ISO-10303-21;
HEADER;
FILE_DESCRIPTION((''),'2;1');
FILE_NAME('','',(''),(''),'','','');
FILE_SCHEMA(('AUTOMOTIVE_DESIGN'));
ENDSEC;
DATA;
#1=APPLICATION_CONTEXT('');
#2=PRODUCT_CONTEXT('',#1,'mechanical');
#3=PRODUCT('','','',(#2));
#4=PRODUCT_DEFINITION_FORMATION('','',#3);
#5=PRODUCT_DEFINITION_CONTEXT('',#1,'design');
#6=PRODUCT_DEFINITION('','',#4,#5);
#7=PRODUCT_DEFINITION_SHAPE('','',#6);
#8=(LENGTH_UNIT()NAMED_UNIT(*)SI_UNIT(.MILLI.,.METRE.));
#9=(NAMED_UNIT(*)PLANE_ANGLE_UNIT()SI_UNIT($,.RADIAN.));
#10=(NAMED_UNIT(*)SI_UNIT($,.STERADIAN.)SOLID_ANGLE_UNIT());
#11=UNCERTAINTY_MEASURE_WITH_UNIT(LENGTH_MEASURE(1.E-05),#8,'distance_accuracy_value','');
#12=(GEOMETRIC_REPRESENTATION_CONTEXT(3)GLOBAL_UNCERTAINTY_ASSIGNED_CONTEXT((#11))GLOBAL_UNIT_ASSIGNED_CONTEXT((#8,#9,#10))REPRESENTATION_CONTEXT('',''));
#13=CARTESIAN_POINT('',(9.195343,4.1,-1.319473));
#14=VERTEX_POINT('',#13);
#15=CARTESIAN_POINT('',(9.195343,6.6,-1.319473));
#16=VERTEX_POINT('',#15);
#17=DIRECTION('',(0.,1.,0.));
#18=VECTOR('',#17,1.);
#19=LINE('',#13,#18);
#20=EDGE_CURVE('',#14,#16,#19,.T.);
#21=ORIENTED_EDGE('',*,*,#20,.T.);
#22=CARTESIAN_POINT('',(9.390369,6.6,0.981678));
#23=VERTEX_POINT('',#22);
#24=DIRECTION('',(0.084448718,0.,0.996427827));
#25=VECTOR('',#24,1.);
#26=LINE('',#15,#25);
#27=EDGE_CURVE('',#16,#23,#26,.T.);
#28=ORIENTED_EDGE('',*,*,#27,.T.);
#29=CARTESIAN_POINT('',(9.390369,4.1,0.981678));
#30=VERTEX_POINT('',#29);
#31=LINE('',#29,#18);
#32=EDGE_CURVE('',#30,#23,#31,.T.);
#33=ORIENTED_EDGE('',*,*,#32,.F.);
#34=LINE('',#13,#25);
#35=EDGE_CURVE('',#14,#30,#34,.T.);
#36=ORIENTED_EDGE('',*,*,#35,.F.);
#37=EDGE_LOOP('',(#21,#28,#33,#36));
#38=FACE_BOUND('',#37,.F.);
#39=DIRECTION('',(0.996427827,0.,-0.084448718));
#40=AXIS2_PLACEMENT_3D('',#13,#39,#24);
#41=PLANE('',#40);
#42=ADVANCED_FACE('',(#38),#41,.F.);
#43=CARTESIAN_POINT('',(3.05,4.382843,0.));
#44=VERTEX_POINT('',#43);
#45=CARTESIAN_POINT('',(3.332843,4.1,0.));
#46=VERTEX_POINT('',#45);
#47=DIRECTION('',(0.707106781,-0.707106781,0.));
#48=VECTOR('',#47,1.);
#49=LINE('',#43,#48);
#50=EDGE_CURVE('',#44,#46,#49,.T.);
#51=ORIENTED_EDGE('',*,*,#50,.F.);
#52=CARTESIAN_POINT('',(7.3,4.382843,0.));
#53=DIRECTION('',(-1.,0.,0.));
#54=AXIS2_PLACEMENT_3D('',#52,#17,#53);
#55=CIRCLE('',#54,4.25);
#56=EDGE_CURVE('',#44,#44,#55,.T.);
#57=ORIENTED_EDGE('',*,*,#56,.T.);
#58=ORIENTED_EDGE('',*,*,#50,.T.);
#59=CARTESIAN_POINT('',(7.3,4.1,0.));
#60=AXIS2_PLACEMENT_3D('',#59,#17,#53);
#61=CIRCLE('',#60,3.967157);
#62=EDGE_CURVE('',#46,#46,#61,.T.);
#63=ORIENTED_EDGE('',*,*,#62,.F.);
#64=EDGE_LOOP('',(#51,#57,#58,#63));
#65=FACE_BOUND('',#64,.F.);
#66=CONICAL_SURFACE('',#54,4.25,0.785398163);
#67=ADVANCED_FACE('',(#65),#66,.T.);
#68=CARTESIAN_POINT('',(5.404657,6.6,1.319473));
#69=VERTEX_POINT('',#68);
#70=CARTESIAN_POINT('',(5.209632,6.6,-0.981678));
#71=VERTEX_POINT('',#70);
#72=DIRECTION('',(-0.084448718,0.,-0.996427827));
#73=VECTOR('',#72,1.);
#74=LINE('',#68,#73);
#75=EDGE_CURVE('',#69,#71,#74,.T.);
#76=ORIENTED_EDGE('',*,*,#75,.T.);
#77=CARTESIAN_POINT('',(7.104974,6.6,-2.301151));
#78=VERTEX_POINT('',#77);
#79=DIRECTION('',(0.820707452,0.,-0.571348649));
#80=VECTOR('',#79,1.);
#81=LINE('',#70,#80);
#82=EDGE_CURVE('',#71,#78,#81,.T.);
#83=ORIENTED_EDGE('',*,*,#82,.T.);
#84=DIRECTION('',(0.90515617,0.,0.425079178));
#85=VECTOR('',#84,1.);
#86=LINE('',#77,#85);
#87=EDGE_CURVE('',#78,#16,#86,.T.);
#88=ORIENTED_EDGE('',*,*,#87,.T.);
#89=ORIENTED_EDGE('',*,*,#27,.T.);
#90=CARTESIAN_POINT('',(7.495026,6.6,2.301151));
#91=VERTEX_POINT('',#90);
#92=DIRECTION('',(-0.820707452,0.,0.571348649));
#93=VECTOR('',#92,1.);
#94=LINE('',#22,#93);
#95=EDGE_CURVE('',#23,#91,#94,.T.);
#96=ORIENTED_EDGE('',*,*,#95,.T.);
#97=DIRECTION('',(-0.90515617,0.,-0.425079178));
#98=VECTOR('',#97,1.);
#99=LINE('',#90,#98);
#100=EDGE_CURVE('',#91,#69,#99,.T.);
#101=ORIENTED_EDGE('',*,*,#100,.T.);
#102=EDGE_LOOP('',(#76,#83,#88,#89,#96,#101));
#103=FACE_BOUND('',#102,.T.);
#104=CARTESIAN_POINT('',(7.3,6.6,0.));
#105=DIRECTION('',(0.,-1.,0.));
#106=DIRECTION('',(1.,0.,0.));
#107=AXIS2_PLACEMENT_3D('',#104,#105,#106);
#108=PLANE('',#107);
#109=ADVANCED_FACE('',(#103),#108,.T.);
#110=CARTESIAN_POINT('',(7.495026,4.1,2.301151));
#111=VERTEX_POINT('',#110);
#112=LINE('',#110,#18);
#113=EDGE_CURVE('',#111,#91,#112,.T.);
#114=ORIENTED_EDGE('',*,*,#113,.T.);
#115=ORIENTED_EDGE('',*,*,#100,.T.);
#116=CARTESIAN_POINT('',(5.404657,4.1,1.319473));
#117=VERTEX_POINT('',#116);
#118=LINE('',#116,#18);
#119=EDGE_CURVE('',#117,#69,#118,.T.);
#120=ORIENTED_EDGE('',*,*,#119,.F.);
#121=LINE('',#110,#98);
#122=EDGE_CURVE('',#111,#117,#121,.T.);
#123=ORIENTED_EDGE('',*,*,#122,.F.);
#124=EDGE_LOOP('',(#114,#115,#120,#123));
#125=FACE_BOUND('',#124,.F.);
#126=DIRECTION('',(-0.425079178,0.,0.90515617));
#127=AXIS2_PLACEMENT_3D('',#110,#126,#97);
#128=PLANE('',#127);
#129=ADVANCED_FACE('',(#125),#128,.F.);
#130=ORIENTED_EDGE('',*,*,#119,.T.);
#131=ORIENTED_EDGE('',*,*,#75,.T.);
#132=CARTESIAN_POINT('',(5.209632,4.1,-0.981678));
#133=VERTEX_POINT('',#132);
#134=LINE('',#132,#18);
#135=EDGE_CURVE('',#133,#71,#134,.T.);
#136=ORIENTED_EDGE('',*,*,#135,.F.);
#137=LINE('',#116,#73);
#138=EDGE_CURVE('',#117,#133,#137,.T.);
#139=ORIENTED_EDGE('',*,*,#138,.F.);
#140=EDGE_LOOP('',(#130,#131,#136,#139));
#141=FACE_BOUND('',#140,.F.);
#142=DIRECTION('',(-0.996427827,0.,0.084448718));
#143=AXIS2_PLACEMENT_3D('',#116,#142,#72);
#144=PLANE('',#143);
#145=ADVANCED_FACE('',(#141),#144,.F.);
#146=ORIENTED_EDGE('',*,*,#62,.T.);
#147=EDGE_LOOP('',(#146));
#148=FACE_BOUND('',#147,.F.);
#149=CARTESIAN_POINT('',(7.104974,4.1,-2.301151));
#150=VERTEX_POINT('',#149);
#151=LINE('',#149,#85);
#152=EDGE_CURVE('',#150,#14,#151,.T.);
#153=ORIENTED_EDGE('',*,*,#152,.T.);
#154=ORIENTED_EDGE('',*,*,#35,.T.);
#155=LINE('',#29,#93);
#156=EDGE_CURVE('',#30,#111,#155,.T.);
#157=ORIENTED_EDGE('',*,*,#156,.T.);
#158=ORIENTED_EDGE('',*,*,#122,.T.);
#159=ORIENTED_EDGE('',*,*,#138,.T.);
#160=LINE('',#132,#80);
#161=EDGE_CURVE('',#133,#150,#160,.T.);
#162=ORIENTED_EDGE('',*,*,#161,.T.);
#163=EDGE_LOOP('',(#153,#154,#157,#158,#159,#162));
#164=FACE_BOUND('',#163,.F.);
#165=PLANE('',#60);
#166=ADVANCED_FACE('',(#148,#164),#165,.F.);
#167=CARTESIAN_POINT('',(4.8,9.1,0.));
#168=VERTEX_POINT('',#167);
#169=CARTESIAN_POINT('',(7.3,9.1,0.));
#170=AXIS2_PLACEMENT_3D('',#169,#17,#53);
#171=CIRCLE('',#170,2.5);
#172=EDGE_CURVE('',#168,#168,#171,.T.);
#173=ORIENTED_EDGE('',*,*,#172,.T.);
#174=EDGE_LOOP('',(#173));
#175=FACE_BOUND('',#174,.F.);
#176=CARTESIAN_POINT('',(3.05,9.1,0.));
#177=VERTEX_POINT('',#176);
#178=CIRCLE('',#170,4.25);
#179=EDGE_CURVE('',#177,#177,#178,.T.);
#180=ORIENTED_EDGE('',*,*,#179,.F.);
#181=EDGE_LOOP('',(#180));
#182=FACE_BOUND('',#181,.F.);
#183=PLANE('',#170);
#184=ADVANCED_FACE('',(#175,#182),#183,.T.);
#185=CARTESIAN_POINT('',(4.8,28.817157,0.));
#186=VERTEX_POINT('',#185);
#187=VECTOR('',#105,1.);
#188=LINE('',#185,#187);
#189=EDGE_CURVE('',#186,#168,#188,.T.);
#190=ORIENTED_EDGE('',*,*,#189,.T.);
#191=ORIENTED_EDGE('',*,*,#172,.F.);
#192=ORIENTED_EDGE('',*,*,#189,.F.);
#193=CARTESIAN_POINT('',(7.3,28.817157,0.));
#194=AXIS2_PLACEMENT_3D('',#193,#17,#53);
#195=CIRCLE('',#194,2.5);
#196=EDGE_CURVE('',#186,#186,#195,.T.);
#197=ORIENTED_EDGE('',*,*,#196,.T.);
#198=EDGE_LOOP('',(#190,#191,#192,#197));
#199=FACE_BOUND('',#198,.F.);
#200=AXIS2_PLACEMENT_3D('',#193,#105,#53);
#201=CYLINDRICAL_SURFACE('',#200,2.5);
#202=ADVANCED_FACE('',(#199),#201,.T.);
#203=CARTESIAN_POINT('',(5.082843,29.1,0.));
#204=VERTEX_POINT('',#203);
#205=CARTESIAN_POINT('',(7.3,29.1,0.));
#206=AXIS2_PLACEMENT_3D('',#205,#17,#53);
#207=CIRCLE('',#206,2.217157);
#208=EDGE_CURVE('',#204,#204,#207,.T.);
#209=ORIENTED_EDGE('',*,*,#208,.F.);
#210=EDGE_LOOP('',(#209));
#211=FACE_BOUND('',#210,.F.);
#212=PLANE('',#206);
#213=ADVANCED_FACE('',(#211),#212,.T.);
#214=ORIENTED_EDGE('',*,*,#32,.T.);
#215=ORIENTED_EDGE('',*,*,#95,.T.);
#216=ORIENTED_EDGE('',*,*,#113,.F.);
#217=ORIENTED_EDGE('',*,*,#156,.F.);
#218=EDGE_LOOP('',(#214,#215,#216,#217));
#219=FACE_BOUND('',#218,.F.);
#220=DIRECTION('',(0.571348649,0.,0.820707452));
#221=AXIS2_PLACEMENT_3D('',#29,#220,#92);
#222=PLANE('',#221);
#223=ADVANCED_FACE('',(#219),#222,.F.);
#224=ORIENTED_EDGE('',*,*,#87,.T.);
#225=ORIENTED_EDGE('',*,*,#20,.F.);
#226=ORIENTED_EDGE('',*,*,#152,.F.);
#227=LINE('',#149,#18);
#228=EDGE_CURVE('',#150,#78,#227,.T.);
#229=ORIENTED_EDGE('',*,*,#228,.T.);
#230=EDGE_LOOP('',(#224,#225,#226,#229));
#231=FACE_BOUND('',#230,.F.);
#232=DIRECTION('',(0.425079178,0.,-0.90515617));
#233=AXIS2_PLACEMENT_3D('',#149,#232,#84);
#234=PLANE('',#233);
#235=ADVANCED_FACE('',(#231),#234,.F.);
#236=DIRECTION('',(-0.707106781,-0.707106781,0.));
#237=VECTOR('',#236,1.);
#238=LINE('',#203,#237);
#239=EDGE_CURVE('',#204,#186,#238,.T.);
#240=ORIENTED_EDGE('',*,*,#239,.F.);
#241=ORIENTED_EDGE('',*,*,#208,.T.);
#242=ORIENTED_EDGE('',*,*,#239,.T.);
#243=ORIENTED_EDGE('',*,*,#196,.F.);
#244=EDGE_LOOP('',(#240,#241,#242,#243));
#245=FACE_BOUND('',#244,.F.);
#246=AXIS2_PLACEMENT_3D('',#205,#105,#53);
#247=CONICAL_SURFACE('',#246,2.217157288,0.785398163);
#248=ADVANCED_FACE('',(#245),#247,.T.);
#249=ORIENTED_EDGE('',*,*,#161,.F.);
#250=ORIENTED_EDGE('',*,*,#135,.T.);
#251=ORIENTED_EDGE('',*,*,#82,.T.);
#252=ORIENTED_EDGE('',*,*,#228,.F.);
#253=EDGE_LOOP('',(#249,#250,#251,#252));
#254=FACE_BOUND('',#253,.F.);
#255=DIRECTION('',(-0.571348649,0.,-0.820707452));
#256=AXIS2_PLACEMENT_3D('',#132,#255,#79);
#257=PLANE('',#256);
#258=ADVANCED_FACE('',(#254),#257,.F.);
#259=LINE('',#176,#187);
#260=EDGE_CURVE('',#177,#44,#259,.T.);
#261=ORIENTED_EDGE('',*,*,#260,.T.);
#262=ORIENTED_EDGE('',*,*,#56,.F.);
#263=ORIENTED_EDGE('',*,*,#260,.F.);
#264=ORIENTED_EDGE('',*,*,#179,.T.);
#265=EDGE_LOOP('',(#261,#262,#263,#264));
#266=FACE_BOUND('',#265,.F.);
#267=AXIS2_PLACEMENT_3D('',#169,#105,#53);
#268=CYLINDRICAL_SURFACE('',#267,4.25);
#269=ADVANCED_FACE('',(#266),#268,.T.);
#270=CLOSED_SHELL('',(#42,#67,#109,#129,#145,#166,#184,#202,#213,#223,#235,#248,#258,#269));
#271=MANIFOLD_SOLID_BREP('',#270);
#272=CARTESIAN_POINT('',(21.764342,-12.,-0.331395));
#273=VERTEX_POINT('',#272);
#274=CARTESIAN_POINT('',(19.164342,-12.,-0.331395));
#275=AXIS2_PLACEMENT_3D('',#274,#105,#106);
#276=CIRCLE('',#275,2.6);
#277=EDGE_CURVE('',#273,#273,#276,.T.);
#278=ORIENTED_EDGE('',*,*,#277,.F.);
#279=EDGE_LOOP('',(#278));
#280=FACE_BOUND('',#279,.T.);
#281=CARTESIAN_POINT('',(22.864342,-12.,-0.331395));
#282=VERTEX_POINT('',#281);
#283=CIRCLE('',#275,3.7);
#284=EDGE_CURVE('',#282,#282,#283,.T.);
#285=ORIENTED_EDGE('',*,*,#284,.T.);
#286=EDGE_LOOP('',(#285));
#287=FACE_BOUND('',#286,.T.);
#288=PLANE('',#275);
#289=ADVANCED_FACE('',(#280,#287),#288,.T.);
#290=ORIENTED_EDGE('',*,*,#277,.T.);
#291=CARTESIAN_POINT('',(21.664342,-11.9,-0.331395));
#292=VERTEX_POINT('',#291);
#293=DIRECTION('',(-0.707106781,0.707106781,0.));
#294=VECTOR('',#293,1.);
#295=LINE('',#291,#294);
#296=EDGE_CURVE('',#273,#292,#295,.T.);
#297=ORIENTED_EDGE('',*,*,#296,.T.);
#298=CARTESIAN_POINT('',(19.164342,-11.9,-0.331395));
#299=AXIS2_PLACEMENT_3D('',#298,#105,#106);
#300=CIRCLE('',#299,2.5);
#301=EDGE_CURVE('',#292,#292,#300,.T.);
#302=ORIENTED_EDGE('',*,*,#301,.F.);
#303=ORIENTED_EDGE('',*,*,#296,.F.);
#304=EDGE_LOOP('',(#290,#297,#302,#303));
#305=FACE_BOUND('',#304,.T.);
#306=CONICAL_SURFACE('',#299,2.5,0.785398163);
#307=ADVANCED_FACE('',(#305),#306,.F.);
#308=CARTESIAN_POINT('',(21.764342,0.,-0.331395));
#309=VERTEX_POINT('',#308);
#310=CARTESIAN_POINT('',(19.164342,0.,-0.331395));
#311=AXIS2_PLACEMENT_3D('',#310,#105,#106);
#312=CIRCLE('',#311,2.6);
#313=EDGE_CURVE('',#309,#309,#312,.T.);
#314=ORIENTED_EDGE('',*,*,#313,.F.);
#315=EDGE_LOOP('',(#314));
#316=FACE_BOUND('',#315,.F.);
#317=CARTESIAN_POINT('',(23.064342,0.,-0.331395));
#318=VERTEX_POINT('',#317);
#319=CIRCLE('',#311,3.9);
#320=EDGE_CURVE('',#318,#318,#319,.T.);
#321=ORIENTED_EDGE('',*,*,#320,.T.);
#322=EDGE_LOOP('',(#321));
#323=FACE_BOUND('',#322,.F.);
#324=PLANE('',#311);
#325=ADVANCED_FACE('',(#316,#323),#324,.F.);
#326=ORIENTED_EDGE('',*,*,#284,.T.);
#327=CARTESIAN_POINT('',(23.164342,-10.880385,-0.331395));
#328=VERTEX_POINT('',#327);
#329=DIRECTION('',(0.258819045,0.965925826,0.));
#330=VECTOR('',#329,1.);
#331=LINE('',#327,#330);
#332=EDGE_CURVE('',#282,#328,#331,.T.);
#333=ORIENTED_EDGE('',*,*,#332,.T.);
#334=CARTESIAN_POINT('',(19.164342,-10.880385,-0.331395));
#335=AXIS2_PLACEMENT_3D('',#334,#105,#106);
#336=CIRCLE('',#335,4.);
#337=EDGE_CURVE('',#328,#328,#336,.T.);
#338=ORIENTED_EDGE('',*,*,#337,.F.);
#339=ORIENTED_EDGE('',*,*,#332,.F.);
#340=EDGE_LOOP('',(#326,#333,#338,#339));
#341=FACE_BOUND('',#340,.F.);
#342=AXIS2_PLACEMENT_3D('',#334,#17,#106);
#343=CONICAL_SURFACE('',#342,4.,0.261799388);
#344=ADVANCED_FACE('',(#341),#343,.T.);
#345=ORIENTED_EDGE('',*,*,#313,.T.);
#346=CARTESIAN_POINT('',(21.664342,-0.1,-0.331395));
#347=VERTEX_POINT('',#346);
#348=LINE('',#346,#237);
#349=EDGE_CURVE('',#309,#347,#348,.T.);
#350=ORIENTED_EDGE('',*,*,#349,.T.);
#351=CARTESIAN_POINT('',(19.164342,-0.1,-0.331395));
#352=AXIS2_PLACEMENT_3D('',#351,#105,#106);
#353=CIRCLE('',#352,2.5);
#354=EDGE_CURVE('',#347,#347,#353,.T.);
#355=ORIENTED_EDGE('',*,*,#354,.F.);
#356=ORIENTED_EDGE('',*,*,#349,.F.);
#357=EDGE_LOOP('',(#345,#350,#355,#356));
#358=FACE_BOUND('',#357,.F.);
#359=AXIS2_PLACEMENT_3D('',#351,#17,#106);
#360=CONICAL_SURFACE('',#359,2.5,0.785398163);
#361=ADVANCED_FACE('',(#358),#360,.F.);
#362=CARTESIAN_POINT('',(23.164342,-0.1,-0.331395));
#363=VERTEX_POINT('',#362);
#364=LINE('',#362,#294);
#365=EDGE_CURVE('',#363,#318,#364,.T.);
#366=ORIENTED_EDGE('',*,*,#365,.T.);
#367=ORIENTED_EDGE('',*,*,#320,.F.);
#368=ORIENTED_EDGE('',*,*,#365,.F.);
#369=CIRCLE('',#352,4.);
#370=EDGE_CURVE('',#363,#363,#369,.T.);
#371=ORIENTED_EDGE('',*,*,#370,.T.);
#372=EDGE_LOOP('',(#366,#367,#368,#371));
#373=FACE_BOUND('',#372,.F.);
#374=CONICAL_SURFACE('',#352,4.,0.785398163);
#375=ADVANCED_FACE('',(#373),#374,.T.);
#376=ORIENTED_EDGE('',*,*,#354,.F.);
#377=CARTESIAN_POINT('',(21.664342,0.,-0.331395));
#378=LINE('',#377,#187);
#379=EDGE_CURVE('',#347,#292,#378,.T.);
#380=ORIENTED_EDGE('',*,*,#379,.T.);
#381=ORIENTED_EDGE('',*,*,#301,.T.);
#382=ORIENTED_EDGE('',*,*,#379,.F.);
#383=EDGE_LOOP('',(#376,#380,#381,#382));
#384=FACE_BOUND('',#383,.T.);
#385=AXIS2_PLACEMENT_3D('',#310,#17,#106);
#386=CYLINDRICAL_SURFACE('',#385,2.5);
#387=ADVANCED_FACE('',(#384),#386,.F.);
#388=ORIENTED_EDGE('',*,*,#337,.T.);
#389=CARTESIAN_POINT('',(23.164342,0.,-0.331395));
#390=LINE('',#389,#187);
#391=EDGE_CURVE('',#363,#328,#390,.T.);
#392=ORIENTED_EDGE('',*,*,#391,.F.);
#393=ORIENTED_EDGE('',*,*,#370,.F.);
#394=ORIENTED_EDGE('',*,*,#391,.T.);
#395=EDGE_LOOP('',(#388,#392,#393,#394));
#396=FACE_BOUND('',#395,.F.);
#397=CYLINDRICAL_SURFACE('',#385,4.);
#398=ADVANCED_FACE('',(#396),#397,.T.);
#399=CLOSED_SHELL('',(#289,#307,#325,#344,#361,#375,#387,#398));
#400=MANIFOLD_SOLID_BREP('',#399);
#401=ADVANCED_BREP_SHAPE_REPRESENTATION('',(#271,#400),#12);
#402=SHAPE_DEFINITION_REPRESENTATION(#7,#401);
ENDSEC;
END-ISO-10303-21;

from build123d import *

# Parameters (mm, degrees)
F3_DEPTH = 2.5
F4_R     = 4
F4_R_2   = 2.5
F5_DEPTH = 12
F6_SIZE2 = 1.1196152423
F6_SIZE  = 0.3
F7_SIZE  = 0.1


with BuildPart() as f1:
    # F0 (on Top) → F1 (revolve)
    with BuildSketch(Plane.XY):
        Polygon((4.8000001721, 9.1000000201), (3.0500001721, 9.1000000201), (3.0500001721, 4.3828427326), (3.3328428846, 4.1000000201), (7.3000001721, 4.1000000201), (7.3000001721, 9.1000000201), (7.3000001721, 29.1000000201), (5.0828428846, 29.1000000201), (4.8000001721, 28.8171573076), align=None)
    revolve(axis=Axis((7.3000001721, 19.1000000201, 0), (0, 1, 0)))

    # F2 (on face) → F3 (cut)
    with BuildSketch(Plane.XZ.offset(-4.1000000201)):
        Polygon((9.390368806, 0.9816783118), (7.4950261327, 2.3011514961), (5.4046574988, 1.3194731844), (5.2096315382, -0.9816783118), (7.1049742115, -2.3011514961), (9.1953428454, -1.3194731844), align=None)
    extrude(amount=-F3_DEPTH, mode=Mode.SUBTRACT)


with BuildPart() as f5:
    # F4 (on Front) → F5 (new body)
    with BuildSketch(Plane.XZ):
        with Locations((19.1643424332, -0.3313947527)):
            Circle(F4_R)
        with Locations((19.1643424332, -0.3313947527)):
            Circle(F4_R_2, mode=Mode.SUBTRACT)
    extrude(amount=F5_DEPTH)

    # F6
    f6_edges = [f5.edges().sort_by_distance(p)[0] for p in [
        (15.164342, -12, -0.331395),
    ]]
    f6_side = f5.faces().sort_by_distance((15.27748, -12, -0.331395))[0]
    chamfer(f6_edges, length=F6_SIZE, length2=F6_SIZE2, reference=f6_side)

    # F7
    f7_edges = [f5.edges().sort_by_distance(p)[0] for p in [
        (15.164342, 0, -0.331395),
        (16.664342, 0, -0.331395),
        (16.664342, -12, -0.331395),
    ]]
    chamfer(f7_edges, length=F7_SIZE)


solid = Compound([f1.part, f5.part])
